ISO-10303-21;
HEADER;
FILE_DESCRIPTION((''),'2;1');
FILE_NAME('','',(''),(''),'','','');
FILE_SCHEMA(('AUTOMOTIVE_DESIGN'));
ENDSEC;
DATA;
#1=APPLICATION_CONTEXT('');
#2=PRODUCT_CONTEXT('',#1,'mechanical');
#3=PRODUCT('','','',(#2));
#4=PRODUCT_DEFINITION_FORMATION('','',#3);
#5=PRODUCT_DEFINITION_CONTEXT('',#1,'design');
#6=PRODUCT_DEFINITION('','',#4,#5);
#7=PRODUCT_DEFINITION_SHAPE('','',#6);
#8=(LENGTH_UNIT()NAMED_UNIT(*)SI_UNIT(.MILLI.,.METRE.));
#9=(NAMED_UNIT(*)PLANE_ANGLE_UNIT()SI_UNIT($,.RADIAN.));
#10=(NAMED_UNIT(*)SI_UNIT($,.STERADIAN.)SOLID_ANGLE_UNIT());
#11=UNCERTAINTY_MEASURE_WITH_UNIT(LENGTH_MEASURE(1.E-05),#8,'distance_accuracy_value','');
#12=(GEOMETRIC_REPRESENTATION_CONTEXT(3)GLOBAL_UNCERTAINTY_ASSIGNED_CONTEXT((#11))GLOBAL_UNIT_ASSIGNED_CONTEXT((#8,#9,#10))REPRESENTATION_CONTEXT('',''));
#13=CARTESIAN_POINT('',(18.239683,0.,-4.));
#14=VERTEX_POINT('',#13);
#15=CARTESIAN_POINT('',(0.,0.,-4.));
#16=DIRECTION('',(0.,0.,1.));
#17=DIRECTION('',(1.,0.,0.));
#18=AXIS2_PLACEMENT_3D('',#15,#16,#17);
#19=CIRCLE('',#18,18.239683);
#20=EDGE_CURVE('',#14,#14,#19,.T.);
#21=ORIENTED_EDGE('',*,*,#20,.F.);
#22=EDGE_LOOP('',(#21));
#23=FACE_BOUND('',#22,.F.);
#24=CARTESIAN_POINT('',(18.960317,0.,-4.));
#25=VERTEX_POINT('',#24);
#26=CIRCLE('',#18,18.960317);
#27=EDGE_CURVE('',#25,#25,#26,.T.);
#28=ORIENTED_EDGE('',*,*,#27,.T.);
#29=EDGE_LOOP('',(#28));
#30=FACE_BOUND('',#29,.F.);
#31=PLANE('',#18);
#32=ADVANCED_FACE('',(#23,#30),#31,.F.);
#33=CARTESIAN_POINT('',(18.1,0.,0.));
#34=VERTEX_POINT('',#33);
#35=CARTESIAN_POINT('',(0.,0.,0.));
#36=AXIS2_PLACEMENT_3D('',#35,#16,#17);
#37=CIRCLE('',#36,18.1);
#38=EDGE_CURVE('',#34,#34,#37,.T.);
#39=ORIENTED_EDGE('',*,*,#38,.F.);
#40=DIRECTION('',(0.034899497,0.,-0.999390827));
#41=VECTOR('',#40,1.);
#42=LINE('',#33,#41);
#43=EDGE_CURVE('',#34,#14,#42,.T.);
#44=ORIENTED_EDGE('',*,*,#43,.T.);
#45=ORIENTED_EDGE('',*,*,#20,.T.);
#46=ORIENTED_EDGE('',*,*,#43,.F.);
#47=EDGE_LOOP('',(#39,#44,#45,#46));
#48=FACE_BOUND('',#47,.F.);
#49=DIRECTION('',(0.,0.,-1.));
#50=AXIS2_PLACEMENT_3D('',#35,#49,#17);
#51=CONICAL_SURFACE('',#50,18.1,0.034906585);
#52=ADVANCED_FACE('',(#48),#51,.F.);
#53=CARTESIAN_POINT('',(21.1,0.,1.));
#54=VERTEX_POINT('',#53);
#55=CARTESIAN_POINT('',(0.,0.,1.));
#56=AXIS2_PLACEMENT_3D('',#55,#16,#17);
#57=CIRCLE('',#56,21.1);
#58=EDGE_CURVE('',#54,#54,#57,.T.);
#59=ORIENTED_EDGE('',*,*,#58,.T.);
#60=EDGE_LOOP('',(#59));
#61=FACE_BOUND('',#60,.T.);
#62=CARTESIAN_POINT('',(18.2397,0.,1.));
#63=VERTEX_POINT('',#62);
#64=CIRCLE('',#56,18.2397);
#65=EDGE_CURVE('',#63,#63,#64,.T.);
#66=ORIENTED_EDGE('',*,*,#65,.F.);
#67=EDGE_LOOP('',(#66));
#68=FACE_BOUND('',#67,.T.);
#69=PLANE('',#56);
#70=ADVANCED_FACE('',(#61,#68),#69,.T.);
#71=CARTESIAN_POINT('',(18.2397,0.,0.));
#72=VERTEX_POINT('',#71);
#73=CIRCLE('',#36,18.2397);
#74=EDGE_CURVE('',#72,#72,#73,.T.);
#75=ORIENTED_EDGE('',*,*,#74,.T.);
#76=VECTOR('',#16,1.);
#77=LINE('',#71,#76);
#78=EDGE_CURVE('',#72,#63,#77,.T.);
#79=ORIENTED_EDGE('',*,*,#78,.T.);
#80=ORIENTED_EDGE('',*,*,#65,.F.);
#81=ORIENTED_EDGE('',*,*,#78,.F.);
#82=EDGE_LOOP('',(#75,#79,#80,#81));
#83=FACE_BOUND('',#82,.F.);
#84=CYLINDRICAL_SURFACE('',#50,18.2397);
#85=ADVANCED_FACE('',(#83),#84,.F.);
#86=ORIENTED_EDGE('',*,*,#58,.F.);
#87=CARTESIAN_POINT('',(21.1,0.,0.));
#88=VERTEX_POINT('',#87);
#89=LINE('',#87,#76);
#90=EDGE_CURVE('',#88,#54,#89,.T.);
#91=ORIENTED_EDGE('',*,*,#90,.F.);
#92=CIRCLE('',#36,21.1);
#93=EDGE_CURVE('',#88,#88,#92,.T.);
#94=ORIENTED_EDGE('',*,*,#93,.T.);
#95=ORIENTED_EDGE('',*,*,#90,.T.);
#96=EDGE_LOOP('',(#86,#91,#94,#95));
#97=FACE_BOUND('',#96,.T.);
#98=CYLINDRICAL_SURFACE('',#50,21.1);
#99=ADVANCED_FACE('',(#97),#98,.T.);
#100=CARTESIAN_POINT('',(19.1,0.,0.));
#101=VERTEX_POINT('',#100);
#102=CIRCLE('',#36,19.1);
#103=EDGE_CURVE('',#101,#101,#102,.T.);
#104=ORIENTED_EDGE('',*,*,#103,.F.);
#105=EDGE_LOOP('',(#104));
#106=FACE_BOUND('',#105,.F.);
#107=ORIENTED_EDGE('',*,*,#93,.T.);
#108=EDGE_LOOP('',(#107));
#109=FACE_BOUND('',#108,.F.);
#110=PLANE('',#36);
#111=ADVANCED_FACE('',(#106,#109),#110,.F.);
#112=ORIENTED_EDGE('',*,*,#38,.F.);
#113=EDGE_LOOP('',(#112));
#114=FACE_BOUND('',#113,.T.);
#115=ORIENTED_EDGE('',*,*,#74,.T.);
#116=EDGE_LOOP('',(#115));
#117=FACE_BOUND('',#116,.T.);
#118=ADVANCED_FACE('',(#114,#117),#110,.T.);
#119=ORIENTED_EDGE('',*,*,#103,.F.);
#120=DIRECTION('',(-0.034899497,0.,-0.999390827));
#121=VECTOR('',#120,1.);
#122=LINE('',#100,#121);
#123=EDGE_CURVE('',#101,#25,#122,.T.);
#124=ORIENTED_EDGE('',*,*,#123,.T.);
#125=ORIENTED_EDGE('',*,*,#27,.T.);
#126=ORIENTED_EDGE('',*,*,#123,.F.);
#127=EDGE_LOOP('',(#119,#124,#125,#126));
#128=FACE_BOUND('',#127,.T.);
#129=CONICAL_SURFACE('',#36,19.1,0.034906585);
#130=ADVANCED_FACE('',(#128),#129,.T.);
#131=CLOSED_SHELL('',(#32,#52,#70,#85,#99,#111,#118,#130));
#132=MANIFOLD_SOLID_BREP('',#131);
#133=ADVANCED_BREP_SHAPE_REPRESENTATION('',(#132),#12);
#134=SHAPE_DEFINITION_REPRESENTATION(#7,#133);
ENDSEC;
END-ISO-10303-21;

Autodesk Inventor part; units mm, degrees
ref_plane "YZ Plane" through (0, 0, 0) normal (1, 0, 0) x (0, 1, 0)
ref_plane "XZ Plane" through (0, 0, 0) normal (0, 1, 0) x (-1, 0, 0)
sketch "Sketch1" plane through (0, 0, 0) normal (0, 0, 1) x (1, 0, 0)
  line L0 (16.8, 24.9006) -> (-16.8, 24.9006) projected
  line L1 (-16.8, 24.9006) -> (-16.8, 21.2406) projected
  line L2 (-16.8, 21.2406) -> (-21.2406, 16.8) projected
  line L3 (-21.2406, 16.8) -> (-24.9006, 16.8) projected
  line L4 (-24.9006, 16.8) -> (-24.9006, -16.8) projected
  line L5 (-24.9006, -16.8) -> (-21.2406, -16.8) projected
  line L6 (-21.2406, -16.8) -> (-16.8, -21.2406) projected
  line L7 (-16.8, -21.2406) -> (-16.8, -24.9006) projected
  line L8 (-16.8, -24.9006) -> (16.8, -24.9006) projected
  line L9 (16.8, -24.9006) -> (16.8, -21.2406) projected
  line L10 (16.8, -21.2406) -> (21.2406, -16.8) projected
  line L11 (21.2406, -16.8) -> (24.9006, -16.8) projected
  line L12 (24.9006, -16.8) -> (24.9006, 16.8) projected
  line L13 (24.9006, 16.8) -> (21.2406, 16.8) projected
  line L14 (21.2406, 16.8) -> (16.8, 21.2406) projected
  line L15 (16.8, 21.2406) -> (16.8, 24.9006) projected
  arc A0 (-24.9006, -4.1858) -> (-4.1858, -24.9006) centre (0, 0) ccw
  circle A1 centre (0, 0) radius 19.1
  circle A2 centre (0, 0) radius 18.1
  circle A3 centre (0, 0) radius 20.6
  circle A4 centre (0, 0) radius 19.6 construction
  circle A5 centre (0, 0) radius 20.6 construction
  circle A6 centre (0, 0) radius 20.6 construction
  point P0 (0, 0)
  dimension "d14" = 38.2
  dimension "d17" = 1
ref_plane "Work Plane1" through (-13.5, -13.5, -4) normal (0, 0, 1) x (1, 0, 0)
extrude "Extrusion1" add sketch "Sketch1" against normal blind 4 draft -2 contours A1
sketch "Sketch2" plane through (0, 0, 0) normal (0, 0, 1) x (1, 0, 0)
  line L0 (0, -33.742) -> (0, 37.252) construction
  arc A0 (2, 25.1004) -> (-2, 25.1004) centre (0, 25.11) ccw
  circle A1 centre (0, 0) radius 19.1 projected
  circle A2 centre (0, 0) radius 21.1
  circle A3 centre (0, 0) radius 18.2397 projected
  point P0 (0, 0)
  dimension "d5" = 2
  dimension "d16" = 2
extrude "Extrusion2" add sketch "Sketch2" along normal blind 1 contours A1 | A2
properties part number "20_Lens_holder_156mm_clamp"
